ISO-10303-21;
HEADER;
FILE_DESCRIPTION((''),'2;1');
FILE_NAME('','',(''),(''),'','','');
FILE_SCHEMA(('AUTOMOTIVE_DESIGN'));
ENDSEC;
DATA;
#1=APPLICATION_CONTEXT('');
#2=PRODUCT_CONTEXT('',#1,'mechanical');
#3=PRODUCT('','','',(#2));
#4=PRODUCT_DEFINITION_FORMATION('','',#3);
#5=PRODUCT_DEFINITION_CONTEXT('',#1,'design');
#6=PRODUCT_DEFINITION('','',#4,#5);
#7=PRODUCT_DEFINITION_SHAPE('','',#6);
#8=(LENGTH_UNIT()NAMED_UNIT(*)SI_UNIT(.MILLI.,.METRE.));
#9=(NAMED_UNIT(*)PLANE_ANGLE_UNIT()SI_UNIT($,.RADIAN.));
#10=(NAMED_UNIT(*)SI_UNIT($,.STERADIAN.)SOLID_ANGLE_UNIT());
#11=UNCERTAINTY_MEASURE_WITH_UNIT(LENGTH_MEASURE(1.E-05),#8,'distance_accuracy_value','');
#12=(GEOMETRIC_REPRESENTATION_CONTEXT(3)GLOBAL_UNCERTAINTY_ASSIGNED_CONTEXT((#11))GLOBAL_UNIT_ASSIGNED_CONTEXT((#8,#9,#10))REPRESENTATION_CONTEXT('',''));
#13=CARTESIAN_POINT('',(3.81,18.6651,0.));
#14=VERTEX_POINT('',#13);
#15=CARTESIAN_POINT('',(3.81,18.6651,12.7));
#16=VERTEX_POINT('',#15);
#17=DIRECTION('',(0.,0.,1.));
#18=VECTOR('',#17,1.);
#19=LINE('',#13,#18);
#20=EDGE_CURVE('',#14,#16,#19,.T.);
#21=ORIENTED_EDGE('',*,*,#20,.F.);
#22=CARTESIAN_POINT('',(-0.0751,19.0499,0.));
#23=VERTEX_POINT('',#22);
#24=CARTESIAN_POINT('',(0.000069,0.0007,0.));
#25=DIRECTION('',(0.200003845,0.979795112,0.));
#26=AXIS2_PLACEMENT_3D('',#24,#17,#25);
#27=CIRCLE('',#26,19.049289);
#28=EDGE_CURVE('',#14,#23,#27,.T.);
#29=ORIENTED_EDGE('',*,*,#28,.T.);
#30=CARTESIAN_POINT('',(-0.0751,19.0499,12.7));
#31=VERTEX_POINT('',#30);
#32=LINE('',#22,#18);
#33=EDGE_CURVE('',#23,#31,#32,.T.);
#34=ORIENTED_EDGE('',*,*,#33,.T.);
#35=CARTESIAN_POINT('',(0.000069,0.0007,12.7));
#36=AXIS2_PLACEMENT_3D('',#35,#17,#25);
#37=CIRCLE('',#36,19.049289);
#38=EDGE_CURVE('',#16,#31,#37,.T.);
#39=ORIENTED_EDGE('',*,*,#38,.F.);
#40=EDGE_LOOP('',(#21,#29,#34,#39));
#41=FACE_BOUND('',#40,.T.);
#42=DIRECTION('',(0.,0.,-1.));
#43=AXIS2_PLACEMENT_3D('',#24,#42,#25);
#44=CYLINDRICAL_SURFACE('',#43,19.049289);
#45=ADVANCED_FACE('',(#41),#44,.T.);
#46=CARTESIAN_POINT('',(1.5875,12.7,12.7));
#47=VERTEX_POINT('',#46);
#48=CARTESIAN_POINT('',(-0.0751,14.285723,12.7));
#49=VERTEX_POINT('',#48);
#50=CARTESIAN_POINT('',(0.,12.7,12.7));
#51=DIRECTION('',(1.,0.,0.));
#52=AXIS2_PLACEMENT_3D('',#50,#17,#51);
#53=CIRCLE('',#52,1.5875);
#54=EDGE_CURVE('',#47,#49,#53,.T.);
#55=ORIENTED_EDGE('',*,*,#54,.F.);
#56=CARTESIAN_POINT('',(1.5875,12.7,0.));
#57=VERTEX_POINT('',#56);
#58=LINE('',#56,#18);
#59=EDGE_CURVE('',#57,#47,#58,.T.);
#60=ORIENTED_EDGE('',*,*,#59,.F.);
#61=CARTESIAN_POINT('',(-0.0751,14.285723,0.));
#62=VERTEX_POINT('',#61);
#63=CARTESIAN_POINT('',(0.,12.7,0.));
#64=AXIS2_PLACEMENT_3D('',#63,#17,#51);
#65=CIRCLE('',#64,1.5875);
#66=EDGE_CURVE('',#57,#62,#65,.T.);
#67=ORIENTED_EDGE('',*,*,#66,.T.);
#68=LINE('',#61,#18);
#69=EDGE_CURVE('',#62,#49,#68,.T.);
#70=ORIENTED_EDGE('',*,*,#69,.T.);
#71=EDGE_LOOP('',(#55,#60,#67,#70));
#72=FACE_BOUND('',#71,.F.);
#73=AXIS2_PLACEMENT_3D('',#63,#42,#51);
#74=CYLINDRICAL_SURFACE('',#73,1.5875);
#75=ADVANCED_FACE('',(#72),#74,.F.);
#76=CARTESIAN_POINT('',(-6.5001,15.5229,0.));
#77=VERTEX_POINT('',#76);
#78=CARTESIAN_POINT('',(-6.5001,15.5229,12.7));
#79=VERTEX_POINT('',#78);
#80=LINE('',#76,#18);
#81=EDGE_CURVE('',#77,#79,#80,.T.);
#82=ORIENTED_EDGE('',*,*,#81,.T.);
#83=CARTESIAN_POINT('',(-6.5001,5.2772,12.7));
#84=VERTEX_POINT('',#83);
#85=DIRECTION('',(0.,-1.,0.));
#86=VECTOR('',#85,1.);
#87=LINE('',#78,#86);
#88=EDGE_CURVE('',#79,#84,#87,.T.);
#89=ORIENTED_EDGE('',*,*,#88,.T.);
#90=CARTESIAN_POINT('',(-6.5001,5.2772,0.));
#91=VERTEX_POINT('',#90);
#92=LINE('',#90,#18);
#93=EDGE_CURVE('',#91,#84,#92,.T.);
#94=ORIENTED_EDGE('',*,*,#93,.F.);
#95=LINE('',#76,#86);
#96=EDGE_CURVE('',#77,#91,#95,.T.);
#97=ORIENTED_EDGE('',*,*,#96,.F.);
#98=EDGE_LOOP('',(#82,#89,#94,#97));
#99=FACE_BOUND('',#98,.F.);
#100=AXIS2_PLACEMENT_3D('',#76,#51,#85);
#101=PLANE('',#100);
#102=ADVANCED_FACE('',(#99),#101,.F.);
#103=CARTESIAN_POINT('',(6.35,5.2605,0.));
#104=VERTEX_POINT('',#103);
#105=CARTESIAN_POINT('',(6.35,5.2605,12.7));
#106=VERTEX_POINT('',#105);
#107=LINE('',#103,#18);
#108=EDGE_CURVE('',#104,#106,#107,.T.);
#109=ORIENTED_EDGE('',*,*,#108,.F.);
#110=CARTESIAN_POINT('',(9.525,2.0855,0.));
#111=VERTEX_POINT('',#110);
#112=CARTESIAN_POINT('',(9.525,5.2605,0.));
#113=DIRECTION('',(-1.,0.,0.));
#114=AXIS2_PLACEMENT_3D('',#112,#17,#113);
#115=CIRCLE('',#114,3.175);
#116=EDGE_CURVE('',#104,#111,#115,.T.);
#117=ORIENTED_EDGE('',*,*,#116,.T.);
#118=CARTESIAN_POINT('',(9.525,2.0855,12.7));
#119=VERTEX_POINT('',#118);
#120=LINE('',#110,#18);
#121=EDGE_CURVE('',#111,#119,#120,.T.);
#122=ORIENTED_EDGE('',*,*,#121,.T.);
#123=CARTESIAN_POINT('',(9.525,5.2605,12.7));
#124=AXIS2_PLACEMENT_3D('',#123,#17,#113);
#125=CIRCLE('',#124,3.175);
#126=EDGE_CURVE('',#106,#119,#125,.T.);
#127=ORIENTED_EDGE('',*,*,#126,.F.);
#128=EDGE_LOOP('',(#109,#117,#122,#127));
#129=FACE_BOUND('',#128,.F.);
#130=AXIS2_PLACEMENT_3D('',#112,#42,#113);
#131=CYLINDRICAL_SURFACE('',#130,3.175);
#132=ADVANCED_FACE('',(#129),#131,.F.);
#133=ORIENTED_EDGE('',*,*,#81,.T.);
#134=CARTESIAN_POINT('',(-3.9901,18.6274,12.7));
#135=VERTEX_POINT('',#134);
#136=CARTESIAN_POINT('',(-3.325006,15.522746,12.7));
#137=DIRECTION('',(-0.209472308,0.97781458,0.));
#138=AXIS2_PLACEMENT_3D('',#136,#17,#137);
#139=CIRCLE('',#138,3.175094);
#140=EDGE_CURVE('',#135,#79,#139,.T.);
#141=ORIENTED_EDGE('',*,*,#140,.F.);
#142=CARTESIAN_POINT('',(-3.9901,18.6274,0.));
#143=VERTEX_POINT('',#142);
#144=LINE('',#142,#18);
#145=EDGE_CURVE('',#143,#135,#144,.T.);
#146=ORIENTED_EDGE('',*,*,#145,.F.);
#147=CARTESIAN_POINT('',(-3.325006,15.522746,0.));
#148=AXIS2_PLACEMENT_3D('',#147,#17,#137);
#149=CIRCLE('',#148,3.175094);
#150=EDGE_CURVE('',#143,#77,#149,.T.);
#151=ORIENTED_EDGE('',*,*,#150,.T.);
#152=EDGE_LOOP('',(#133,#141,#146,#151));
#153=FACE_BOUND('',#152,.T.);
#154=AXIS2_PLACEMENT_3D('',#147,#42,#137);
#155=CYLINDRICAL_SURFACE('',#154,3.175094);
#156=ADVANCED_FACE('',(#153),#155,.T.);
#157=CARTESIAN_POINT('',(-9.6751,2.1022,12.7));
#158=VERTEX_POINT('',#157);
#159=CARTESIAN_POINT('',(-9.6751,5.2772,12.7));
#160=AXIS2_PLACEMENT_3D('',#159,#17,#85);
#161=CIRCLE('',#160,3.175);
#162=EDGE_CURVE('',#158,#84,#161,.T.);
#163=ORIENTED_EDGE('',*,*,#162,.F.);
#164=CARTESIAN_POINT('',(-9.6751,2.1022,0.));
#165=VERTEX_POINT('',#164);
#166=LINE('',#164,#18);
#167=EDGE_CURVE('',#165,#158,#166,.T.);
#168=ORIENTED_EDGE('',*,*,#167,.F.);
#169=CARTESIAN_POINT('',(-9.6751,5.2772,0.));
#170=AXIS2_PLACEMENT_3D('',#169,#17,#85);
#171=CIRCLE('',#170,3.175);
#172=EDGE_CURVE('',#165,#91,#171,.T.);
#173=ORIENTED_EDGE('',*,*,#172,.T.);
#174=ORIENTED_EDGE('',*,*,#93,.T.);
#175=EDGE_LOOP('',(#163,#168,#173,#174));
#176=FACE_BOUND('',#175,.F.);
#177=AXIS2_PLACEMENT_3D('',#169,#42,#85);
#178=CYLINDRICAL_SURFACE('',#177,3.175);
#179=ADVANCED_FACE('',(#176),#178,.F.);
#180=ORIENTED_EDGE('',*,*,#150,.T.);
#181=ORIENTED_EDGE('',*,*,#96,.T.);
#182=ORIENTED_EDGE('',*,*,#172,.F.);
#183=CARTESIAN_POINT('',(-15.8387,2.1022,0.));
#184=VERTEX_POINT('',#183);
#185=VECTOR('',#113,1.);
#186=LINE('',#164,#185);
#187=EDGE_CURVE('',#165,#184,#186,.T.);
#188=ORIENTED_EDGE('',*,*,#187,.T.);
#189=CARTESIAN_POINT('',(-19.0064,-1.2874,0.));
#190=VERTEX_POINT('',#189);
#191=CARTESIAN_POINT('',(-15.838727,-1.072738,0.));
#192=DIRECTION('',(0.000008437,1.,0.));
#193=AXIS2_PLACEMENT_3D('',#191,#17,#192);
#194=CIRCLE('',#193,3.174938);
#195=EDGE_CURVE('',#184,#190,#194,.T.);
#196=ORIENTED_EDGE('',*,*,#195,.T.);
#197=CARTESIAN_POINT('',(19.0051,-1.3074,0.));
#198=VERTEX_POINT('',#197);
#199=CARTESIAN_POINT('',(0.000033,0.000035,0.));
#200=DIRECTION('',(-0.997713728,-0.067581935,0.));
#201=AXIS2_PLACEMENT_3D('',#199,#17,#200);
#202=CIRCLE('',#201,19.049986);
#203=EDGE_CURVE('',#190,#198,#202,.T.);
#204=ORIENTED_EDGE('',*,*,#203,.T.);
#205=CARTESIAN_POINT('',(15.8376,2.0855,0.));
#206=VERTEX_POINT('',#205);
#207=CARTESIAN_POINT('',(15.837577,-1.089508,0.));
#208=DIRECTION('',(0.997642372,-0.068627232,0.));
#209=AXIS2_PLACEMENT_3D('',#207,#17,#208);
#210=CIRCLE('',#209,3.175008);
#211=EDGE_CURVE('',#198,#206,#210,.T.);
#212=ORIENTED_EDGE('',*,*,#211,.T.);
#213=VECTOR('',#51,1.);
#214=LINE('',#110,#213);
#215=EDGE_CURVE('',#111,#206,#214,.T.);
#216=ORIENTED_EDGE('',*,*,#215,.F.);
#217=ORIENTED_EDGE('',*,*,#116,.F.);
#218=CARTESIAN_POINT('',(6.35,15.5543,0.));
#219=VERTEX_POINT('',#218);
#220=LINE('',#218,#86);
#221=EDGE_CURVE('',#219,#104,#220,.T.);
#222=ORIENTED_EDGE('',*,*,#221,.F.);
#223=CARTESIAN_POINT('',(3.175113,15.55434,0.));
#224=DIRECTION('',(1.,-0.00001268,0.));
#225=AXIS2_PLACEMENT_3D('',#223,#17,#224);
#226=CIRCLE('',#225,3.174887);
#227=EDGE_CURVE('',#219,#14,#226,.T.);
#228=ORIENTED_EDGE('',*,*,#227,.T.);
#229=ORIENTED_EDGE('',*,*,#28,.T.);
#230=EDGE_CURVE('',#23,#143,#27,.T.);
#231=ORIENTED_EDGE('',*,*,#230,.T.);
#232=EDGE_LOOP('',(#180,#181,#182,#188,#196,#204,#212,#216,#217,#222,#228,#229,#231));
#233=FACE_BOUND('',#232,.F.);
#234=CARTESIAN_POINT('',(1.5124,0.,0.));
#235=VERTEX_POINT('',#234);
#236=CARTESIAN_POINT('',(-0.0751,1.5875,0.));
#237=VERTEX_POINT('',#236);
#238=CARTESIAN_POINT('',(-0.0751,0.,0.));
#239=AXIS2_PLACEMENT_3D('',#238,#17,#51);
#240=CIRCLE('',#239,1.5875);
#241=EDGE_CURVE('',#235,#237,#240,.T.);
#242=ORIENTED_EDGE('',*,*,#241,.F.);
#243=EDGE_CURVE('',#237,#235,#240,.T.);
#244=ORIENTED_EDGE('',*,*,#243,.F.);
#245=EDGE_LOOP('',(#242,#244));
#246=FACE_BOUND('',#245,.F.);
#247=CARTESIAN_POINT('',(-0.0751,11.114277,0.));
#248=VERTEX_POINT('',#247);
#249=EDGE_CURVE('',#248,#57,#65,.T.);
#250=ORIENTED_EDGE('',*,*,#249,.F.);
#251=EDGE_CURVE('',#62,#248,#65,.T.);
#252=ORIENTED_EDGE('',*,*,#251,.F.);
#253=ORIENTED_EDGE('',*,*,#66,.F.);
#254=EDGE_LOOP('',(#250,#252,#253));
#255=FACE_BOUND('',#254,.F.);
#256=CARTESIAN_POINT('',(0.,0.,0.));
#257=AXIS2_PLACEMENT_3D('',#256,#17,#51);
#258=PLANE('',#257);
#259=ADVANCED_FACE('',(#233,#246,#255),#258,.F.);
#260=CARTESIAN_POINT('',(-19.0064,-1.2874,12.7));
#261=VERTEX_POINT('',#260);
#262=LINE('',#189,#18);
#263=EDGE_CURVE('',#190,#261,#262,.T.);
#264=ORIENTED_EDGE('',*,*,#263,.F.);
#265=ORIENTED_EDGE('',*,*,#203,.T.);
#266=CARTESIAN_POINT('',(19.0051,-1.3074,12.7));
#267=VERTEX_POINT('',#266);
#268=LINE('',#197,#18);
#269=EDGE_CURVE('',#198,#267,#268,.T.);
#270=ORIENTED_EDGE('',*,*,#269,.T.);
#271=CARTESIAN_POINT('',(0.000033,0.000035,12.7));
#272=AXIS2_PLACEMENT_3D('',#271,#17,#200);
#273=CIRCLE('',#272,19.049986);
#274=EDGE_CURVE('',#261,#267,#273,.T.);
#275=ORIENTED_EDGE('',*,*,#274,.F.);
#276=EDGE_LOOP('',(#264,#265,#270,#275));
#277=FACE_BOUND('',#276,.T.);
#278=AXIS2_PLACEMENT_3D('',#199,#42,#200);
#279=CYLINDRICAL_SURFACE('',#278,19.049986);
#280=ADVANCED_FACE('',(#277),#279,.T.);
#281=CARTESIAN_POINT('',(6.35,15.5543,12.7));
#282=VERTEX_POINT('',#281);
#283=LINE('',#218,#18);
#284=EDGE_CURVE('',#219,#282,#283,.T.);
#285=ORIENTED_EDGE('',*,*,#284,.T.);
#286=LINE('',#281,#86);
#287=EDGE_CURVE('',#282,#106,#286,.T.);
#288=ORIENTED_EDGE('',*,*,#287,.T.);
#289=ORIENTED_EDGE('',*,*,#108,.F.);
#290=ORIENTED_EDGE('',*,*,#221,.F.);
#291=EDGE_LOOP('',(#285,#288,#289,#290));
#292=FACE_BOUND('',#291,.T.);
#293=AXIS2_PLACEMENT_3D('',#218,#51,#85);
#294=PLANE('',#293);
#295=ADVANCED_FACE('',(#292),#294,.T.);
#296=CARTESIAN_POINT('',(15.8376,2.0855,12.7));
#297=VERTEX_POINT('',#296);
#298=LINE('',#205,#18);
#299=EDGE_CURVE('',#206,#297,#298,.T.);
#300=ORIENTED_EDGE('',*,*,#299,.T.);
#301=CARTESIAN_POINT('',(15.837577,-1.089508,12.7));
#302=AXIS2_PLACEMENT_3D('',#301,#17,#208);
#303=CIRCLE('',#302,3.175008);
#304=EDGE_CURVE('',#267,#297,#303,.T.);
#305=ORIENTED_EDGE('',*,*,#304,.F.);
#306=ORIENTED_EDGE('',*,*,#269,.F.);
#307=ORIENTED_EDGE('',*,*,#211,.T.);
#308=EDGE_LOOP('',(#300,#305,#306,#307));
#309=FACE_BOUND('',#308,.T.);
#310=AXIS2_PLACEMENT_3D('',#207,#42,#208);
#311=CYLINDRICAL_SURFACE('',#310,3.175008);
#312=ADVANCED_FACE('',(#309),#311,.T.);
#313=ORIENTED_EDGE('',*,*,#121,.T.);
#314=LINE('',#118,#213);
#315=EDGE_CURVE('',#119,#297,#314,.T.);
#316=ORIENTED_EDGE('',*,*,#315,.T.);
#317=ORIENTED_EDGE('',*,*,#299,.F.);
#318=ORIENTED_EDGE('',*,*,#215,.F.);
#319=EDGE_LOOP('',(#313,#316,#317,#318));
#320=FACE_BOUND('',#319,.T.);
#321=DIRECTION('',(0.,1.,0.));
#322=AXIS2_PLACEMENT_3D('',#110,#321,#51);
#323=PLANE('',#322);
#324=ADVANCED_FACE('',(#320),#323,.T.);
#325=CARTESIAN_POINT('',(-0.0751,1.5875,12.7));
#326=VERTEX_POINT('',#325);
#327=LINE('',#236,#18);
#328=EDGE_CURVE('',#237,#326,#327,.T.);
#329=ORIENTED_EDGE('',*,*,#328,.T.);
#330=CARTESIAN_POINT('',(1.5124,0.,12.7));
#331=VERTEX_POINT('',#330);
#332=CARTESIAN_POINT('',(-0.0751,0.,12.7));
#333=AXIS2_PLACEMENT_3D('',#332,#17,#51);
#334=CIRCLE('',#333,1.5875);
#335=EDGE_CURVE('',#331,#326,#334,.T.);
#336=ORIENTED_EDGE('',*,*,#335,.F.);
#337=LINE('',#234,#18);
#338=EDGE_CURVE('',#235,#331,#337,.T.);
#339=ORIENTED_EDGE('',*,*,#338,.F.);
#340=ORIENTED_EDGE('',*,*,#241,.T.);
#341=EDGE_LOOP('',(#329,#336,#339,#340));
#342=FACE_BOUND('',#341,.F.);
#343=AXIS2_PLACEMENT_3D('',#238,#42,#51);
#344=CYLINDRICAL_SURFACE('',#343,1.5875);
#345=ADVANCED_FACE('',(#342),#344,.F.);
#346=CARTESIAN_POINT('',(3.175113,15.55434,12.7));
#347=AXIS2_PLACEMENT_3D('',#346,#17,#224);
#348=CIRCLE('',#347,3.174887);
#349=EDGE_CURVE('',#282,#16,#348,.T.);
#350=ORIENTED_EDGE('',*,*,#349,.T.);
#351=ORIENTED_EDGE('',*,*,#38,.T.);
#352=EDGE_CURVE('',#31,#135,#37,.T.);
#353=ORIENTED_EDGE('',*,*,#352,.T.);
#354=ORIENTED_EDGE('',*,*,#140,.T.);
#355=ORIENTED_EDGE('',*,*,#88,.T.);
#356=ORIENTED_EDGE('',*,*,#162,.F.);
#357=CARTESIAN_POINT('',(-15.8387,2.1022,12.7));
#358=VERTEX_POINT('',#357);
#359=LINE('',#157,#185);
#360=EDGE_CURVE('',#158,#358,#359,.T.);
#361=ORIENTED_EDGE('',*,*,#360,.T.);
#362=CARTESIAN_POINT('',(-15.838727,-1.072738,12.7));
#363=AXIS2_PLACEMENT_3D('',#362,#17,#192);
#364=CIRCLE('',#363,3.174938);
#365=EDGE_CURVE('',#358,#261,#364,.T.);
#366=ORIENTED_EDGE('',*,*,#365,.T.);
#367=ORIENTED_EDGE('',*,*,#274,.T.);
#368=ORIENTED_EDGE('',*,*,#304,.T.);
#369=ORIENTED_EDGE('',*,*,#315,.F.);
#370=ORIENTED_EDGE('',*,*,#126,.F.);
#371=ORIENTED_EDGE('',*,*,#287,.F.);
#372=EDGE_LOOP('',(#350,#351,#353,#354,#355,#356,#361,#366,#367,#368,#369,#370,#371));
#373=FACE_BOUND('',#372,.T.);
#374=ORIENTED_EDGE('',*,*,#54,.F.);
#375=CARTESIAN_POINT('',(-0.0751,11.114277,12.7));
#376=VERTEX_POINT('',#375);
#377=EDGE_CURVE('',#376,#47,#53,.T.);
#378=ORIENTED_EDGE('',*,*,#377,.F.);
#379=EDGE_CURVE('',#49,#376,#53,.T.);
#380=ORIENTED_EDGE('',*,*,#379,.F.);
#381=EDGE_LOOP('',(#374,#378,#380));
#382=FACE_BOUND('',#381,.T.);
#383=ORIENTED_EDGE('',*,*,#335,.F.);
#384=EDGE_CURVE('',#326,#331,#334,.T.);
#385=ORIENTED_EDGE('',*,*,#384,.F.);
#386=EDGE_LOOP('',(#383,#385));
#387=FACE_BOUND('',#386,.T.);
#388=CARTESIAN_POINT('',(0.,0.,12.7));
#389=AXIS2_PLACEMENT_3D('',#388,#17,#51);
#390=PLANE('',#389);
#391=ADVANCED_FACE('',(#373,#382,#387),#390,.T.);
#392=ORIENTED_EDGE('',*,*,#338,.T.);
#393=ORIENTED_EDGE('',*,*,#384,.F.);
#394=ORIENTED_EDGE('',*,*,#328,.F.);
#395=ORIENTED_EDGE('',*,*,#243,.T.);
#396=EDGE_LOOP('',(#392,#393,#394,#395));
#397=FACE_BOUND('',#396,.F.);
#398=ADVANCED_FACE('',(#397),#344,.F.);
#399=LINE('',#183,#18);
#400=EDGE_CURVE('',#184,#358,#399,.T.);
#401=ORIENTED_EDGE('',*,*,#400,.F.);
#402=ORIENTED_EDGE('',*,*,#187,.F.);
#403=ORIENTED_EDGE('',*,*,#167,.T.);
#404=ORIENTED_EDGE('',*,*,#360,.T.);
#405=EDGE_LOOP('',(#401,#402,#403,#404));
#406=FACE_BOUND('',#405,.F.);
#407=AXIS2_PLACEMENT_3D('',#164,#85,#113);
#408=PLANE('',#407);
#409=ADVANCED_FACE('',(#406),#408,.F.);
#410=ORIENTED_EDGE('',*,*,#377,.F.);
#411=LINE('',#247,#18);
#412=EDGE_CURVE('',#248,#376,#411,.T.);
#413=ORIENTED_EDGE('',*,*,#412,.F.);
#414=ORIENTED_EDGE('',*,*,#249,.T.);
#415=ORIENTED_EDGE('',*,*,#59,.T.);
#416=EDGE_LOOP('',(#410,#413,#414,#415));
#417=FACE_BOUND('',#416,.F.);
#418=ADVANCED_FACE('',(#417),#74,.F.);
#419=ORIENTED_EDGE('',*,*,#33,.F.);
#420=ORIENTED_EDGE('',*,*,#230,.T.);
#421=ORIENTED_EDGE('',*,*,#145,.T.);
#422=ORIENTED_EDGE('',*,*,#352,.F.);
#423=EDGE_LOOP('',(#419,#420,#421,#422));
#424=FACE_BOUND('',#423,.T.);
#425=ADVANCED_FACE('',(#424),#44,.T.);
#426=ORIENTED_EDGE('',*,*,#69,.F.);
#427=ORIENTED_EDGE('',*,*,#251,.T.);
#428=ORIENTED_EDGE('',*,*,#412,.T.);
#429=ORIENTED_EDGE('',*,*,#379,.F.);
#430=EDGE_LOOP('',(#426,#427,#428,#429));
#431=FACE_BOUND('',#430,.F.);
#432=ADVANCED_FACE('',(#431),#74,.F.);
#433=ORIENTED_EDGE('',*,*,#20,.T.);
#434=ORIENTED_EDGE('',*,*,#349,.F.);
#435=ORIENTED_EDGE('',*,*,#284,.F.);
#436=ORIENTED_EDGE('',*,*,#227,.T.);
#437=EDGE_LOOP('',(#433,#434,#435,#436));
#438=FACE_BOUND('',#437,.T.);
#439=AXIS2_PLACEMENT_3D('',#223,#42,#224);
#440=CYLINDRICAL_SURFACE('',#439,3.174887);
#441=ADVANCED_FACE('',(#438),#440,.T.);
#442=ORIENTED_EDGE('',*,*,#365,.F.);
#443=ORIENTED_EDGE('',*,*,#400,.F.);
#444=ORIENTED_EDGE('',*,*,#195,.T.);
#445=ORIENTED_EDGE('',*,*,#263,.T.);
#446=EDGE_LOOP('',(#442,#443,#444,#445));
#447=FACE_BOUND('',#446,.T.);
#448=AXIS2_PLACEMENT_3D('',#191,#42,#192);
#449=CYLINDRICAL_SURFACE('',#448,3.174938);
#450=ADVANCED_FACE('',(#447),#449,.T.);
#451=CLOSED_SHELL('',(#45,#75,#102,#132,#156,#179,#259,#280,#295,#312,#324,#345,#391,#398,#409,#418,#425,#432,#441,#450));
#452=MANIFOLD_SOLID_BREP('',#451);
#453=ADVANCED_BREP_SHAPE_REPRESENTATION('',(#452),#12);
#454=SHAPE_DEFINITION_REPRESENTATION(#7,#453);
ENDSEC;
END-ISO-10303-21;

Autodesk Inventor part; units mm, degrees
ref_plane "YZ Plane" through (0, 0, 0) normal (1, 0, 0) x (0, 1, 0)
ref_plane "XZ Plane" through (0, 0, 0) normal (0, 1, 0) x (-1, 0, 0)
ref_plane "XY Plane" through (0, 0, 0) normal (0, 0, 1) x (1, 0, 0)
sketch "Sketch1" plane through (0, 0, 0) normal (0, 0, 1) x (1, 0, 0)
  circle A0 centre (0, 12.7) radius 1.5875
  circle A1 centre (-0.0751, 0) radius 1.5875
  line L0 (-0.0751, 0) -> (-0.0751, 19.0499)
  line L1 (-0.0751, 1.5875) -> (-0.0751, 24.8386)
  line L2 (6.35, 15.5543) -> (6.35, 5.2605)
  line L3 (9.525, 2.0855) -> (15.8376, 2.0855)
  line L4 (-6.5001, 15.5229) -> (-6.5001, 5.2772)
  line L5 (-9.6751, 2.1022) -> (-15.8387, 2.1022)
  arc A2 (-19.0064, -1.2874) -> (19.0051, -1.3074) centre (0, 0) ccw
  arc A3 (3.81, 18.6651) -> (-3.9901, 18.6274) centre (0, 0) ccw
  arc A4 (-3.9901, 18.6274) -> (-6.5001, 15.5229) centre (-3.3251, 15.5229) ccw
  arc A5 (6.35, 15.5543) -> (3.81, 18.6651) centre (3.175, 15.5543) ccw
  arc A6 (6.35, 5.2605) -> (9.525, 2.0855) centre (9.525, 5.2605) ccw
  arc A7 (-9.6751, 2.1022) -> (-6.5001, 5.2772) centre (-9.6751, 5.2772) ccw
  arc A8 (-15.8387, 2.1022) -> (-19.0064, -1.2874) centre (-15.8387, -1.0728) ccw
  arc A9 (19.0051, -1.3074) -> (15.8376, 2.0855) centre (15.8376, -1.0895) ccw
  point P0 (6.35, 17.9605)
  point P1 (6.35, 2.0855)
  point P2 (18.9355, 2.0855)
  point P3 (-6.5001, 2.1022)
  point P4 (-18.9337, 2.1022)
  point P5 (-6.5001, 17.9067)
  dimension "d6" = 3.175
  dimension "d3" = 3.175
  dimension "d11" = 15.875
  dimension "d12" = 3.175
extrude "Extrusion1" add sketch "Sketch1" along normal blind 12.7
properties part number "Crank Cutting Jig"
